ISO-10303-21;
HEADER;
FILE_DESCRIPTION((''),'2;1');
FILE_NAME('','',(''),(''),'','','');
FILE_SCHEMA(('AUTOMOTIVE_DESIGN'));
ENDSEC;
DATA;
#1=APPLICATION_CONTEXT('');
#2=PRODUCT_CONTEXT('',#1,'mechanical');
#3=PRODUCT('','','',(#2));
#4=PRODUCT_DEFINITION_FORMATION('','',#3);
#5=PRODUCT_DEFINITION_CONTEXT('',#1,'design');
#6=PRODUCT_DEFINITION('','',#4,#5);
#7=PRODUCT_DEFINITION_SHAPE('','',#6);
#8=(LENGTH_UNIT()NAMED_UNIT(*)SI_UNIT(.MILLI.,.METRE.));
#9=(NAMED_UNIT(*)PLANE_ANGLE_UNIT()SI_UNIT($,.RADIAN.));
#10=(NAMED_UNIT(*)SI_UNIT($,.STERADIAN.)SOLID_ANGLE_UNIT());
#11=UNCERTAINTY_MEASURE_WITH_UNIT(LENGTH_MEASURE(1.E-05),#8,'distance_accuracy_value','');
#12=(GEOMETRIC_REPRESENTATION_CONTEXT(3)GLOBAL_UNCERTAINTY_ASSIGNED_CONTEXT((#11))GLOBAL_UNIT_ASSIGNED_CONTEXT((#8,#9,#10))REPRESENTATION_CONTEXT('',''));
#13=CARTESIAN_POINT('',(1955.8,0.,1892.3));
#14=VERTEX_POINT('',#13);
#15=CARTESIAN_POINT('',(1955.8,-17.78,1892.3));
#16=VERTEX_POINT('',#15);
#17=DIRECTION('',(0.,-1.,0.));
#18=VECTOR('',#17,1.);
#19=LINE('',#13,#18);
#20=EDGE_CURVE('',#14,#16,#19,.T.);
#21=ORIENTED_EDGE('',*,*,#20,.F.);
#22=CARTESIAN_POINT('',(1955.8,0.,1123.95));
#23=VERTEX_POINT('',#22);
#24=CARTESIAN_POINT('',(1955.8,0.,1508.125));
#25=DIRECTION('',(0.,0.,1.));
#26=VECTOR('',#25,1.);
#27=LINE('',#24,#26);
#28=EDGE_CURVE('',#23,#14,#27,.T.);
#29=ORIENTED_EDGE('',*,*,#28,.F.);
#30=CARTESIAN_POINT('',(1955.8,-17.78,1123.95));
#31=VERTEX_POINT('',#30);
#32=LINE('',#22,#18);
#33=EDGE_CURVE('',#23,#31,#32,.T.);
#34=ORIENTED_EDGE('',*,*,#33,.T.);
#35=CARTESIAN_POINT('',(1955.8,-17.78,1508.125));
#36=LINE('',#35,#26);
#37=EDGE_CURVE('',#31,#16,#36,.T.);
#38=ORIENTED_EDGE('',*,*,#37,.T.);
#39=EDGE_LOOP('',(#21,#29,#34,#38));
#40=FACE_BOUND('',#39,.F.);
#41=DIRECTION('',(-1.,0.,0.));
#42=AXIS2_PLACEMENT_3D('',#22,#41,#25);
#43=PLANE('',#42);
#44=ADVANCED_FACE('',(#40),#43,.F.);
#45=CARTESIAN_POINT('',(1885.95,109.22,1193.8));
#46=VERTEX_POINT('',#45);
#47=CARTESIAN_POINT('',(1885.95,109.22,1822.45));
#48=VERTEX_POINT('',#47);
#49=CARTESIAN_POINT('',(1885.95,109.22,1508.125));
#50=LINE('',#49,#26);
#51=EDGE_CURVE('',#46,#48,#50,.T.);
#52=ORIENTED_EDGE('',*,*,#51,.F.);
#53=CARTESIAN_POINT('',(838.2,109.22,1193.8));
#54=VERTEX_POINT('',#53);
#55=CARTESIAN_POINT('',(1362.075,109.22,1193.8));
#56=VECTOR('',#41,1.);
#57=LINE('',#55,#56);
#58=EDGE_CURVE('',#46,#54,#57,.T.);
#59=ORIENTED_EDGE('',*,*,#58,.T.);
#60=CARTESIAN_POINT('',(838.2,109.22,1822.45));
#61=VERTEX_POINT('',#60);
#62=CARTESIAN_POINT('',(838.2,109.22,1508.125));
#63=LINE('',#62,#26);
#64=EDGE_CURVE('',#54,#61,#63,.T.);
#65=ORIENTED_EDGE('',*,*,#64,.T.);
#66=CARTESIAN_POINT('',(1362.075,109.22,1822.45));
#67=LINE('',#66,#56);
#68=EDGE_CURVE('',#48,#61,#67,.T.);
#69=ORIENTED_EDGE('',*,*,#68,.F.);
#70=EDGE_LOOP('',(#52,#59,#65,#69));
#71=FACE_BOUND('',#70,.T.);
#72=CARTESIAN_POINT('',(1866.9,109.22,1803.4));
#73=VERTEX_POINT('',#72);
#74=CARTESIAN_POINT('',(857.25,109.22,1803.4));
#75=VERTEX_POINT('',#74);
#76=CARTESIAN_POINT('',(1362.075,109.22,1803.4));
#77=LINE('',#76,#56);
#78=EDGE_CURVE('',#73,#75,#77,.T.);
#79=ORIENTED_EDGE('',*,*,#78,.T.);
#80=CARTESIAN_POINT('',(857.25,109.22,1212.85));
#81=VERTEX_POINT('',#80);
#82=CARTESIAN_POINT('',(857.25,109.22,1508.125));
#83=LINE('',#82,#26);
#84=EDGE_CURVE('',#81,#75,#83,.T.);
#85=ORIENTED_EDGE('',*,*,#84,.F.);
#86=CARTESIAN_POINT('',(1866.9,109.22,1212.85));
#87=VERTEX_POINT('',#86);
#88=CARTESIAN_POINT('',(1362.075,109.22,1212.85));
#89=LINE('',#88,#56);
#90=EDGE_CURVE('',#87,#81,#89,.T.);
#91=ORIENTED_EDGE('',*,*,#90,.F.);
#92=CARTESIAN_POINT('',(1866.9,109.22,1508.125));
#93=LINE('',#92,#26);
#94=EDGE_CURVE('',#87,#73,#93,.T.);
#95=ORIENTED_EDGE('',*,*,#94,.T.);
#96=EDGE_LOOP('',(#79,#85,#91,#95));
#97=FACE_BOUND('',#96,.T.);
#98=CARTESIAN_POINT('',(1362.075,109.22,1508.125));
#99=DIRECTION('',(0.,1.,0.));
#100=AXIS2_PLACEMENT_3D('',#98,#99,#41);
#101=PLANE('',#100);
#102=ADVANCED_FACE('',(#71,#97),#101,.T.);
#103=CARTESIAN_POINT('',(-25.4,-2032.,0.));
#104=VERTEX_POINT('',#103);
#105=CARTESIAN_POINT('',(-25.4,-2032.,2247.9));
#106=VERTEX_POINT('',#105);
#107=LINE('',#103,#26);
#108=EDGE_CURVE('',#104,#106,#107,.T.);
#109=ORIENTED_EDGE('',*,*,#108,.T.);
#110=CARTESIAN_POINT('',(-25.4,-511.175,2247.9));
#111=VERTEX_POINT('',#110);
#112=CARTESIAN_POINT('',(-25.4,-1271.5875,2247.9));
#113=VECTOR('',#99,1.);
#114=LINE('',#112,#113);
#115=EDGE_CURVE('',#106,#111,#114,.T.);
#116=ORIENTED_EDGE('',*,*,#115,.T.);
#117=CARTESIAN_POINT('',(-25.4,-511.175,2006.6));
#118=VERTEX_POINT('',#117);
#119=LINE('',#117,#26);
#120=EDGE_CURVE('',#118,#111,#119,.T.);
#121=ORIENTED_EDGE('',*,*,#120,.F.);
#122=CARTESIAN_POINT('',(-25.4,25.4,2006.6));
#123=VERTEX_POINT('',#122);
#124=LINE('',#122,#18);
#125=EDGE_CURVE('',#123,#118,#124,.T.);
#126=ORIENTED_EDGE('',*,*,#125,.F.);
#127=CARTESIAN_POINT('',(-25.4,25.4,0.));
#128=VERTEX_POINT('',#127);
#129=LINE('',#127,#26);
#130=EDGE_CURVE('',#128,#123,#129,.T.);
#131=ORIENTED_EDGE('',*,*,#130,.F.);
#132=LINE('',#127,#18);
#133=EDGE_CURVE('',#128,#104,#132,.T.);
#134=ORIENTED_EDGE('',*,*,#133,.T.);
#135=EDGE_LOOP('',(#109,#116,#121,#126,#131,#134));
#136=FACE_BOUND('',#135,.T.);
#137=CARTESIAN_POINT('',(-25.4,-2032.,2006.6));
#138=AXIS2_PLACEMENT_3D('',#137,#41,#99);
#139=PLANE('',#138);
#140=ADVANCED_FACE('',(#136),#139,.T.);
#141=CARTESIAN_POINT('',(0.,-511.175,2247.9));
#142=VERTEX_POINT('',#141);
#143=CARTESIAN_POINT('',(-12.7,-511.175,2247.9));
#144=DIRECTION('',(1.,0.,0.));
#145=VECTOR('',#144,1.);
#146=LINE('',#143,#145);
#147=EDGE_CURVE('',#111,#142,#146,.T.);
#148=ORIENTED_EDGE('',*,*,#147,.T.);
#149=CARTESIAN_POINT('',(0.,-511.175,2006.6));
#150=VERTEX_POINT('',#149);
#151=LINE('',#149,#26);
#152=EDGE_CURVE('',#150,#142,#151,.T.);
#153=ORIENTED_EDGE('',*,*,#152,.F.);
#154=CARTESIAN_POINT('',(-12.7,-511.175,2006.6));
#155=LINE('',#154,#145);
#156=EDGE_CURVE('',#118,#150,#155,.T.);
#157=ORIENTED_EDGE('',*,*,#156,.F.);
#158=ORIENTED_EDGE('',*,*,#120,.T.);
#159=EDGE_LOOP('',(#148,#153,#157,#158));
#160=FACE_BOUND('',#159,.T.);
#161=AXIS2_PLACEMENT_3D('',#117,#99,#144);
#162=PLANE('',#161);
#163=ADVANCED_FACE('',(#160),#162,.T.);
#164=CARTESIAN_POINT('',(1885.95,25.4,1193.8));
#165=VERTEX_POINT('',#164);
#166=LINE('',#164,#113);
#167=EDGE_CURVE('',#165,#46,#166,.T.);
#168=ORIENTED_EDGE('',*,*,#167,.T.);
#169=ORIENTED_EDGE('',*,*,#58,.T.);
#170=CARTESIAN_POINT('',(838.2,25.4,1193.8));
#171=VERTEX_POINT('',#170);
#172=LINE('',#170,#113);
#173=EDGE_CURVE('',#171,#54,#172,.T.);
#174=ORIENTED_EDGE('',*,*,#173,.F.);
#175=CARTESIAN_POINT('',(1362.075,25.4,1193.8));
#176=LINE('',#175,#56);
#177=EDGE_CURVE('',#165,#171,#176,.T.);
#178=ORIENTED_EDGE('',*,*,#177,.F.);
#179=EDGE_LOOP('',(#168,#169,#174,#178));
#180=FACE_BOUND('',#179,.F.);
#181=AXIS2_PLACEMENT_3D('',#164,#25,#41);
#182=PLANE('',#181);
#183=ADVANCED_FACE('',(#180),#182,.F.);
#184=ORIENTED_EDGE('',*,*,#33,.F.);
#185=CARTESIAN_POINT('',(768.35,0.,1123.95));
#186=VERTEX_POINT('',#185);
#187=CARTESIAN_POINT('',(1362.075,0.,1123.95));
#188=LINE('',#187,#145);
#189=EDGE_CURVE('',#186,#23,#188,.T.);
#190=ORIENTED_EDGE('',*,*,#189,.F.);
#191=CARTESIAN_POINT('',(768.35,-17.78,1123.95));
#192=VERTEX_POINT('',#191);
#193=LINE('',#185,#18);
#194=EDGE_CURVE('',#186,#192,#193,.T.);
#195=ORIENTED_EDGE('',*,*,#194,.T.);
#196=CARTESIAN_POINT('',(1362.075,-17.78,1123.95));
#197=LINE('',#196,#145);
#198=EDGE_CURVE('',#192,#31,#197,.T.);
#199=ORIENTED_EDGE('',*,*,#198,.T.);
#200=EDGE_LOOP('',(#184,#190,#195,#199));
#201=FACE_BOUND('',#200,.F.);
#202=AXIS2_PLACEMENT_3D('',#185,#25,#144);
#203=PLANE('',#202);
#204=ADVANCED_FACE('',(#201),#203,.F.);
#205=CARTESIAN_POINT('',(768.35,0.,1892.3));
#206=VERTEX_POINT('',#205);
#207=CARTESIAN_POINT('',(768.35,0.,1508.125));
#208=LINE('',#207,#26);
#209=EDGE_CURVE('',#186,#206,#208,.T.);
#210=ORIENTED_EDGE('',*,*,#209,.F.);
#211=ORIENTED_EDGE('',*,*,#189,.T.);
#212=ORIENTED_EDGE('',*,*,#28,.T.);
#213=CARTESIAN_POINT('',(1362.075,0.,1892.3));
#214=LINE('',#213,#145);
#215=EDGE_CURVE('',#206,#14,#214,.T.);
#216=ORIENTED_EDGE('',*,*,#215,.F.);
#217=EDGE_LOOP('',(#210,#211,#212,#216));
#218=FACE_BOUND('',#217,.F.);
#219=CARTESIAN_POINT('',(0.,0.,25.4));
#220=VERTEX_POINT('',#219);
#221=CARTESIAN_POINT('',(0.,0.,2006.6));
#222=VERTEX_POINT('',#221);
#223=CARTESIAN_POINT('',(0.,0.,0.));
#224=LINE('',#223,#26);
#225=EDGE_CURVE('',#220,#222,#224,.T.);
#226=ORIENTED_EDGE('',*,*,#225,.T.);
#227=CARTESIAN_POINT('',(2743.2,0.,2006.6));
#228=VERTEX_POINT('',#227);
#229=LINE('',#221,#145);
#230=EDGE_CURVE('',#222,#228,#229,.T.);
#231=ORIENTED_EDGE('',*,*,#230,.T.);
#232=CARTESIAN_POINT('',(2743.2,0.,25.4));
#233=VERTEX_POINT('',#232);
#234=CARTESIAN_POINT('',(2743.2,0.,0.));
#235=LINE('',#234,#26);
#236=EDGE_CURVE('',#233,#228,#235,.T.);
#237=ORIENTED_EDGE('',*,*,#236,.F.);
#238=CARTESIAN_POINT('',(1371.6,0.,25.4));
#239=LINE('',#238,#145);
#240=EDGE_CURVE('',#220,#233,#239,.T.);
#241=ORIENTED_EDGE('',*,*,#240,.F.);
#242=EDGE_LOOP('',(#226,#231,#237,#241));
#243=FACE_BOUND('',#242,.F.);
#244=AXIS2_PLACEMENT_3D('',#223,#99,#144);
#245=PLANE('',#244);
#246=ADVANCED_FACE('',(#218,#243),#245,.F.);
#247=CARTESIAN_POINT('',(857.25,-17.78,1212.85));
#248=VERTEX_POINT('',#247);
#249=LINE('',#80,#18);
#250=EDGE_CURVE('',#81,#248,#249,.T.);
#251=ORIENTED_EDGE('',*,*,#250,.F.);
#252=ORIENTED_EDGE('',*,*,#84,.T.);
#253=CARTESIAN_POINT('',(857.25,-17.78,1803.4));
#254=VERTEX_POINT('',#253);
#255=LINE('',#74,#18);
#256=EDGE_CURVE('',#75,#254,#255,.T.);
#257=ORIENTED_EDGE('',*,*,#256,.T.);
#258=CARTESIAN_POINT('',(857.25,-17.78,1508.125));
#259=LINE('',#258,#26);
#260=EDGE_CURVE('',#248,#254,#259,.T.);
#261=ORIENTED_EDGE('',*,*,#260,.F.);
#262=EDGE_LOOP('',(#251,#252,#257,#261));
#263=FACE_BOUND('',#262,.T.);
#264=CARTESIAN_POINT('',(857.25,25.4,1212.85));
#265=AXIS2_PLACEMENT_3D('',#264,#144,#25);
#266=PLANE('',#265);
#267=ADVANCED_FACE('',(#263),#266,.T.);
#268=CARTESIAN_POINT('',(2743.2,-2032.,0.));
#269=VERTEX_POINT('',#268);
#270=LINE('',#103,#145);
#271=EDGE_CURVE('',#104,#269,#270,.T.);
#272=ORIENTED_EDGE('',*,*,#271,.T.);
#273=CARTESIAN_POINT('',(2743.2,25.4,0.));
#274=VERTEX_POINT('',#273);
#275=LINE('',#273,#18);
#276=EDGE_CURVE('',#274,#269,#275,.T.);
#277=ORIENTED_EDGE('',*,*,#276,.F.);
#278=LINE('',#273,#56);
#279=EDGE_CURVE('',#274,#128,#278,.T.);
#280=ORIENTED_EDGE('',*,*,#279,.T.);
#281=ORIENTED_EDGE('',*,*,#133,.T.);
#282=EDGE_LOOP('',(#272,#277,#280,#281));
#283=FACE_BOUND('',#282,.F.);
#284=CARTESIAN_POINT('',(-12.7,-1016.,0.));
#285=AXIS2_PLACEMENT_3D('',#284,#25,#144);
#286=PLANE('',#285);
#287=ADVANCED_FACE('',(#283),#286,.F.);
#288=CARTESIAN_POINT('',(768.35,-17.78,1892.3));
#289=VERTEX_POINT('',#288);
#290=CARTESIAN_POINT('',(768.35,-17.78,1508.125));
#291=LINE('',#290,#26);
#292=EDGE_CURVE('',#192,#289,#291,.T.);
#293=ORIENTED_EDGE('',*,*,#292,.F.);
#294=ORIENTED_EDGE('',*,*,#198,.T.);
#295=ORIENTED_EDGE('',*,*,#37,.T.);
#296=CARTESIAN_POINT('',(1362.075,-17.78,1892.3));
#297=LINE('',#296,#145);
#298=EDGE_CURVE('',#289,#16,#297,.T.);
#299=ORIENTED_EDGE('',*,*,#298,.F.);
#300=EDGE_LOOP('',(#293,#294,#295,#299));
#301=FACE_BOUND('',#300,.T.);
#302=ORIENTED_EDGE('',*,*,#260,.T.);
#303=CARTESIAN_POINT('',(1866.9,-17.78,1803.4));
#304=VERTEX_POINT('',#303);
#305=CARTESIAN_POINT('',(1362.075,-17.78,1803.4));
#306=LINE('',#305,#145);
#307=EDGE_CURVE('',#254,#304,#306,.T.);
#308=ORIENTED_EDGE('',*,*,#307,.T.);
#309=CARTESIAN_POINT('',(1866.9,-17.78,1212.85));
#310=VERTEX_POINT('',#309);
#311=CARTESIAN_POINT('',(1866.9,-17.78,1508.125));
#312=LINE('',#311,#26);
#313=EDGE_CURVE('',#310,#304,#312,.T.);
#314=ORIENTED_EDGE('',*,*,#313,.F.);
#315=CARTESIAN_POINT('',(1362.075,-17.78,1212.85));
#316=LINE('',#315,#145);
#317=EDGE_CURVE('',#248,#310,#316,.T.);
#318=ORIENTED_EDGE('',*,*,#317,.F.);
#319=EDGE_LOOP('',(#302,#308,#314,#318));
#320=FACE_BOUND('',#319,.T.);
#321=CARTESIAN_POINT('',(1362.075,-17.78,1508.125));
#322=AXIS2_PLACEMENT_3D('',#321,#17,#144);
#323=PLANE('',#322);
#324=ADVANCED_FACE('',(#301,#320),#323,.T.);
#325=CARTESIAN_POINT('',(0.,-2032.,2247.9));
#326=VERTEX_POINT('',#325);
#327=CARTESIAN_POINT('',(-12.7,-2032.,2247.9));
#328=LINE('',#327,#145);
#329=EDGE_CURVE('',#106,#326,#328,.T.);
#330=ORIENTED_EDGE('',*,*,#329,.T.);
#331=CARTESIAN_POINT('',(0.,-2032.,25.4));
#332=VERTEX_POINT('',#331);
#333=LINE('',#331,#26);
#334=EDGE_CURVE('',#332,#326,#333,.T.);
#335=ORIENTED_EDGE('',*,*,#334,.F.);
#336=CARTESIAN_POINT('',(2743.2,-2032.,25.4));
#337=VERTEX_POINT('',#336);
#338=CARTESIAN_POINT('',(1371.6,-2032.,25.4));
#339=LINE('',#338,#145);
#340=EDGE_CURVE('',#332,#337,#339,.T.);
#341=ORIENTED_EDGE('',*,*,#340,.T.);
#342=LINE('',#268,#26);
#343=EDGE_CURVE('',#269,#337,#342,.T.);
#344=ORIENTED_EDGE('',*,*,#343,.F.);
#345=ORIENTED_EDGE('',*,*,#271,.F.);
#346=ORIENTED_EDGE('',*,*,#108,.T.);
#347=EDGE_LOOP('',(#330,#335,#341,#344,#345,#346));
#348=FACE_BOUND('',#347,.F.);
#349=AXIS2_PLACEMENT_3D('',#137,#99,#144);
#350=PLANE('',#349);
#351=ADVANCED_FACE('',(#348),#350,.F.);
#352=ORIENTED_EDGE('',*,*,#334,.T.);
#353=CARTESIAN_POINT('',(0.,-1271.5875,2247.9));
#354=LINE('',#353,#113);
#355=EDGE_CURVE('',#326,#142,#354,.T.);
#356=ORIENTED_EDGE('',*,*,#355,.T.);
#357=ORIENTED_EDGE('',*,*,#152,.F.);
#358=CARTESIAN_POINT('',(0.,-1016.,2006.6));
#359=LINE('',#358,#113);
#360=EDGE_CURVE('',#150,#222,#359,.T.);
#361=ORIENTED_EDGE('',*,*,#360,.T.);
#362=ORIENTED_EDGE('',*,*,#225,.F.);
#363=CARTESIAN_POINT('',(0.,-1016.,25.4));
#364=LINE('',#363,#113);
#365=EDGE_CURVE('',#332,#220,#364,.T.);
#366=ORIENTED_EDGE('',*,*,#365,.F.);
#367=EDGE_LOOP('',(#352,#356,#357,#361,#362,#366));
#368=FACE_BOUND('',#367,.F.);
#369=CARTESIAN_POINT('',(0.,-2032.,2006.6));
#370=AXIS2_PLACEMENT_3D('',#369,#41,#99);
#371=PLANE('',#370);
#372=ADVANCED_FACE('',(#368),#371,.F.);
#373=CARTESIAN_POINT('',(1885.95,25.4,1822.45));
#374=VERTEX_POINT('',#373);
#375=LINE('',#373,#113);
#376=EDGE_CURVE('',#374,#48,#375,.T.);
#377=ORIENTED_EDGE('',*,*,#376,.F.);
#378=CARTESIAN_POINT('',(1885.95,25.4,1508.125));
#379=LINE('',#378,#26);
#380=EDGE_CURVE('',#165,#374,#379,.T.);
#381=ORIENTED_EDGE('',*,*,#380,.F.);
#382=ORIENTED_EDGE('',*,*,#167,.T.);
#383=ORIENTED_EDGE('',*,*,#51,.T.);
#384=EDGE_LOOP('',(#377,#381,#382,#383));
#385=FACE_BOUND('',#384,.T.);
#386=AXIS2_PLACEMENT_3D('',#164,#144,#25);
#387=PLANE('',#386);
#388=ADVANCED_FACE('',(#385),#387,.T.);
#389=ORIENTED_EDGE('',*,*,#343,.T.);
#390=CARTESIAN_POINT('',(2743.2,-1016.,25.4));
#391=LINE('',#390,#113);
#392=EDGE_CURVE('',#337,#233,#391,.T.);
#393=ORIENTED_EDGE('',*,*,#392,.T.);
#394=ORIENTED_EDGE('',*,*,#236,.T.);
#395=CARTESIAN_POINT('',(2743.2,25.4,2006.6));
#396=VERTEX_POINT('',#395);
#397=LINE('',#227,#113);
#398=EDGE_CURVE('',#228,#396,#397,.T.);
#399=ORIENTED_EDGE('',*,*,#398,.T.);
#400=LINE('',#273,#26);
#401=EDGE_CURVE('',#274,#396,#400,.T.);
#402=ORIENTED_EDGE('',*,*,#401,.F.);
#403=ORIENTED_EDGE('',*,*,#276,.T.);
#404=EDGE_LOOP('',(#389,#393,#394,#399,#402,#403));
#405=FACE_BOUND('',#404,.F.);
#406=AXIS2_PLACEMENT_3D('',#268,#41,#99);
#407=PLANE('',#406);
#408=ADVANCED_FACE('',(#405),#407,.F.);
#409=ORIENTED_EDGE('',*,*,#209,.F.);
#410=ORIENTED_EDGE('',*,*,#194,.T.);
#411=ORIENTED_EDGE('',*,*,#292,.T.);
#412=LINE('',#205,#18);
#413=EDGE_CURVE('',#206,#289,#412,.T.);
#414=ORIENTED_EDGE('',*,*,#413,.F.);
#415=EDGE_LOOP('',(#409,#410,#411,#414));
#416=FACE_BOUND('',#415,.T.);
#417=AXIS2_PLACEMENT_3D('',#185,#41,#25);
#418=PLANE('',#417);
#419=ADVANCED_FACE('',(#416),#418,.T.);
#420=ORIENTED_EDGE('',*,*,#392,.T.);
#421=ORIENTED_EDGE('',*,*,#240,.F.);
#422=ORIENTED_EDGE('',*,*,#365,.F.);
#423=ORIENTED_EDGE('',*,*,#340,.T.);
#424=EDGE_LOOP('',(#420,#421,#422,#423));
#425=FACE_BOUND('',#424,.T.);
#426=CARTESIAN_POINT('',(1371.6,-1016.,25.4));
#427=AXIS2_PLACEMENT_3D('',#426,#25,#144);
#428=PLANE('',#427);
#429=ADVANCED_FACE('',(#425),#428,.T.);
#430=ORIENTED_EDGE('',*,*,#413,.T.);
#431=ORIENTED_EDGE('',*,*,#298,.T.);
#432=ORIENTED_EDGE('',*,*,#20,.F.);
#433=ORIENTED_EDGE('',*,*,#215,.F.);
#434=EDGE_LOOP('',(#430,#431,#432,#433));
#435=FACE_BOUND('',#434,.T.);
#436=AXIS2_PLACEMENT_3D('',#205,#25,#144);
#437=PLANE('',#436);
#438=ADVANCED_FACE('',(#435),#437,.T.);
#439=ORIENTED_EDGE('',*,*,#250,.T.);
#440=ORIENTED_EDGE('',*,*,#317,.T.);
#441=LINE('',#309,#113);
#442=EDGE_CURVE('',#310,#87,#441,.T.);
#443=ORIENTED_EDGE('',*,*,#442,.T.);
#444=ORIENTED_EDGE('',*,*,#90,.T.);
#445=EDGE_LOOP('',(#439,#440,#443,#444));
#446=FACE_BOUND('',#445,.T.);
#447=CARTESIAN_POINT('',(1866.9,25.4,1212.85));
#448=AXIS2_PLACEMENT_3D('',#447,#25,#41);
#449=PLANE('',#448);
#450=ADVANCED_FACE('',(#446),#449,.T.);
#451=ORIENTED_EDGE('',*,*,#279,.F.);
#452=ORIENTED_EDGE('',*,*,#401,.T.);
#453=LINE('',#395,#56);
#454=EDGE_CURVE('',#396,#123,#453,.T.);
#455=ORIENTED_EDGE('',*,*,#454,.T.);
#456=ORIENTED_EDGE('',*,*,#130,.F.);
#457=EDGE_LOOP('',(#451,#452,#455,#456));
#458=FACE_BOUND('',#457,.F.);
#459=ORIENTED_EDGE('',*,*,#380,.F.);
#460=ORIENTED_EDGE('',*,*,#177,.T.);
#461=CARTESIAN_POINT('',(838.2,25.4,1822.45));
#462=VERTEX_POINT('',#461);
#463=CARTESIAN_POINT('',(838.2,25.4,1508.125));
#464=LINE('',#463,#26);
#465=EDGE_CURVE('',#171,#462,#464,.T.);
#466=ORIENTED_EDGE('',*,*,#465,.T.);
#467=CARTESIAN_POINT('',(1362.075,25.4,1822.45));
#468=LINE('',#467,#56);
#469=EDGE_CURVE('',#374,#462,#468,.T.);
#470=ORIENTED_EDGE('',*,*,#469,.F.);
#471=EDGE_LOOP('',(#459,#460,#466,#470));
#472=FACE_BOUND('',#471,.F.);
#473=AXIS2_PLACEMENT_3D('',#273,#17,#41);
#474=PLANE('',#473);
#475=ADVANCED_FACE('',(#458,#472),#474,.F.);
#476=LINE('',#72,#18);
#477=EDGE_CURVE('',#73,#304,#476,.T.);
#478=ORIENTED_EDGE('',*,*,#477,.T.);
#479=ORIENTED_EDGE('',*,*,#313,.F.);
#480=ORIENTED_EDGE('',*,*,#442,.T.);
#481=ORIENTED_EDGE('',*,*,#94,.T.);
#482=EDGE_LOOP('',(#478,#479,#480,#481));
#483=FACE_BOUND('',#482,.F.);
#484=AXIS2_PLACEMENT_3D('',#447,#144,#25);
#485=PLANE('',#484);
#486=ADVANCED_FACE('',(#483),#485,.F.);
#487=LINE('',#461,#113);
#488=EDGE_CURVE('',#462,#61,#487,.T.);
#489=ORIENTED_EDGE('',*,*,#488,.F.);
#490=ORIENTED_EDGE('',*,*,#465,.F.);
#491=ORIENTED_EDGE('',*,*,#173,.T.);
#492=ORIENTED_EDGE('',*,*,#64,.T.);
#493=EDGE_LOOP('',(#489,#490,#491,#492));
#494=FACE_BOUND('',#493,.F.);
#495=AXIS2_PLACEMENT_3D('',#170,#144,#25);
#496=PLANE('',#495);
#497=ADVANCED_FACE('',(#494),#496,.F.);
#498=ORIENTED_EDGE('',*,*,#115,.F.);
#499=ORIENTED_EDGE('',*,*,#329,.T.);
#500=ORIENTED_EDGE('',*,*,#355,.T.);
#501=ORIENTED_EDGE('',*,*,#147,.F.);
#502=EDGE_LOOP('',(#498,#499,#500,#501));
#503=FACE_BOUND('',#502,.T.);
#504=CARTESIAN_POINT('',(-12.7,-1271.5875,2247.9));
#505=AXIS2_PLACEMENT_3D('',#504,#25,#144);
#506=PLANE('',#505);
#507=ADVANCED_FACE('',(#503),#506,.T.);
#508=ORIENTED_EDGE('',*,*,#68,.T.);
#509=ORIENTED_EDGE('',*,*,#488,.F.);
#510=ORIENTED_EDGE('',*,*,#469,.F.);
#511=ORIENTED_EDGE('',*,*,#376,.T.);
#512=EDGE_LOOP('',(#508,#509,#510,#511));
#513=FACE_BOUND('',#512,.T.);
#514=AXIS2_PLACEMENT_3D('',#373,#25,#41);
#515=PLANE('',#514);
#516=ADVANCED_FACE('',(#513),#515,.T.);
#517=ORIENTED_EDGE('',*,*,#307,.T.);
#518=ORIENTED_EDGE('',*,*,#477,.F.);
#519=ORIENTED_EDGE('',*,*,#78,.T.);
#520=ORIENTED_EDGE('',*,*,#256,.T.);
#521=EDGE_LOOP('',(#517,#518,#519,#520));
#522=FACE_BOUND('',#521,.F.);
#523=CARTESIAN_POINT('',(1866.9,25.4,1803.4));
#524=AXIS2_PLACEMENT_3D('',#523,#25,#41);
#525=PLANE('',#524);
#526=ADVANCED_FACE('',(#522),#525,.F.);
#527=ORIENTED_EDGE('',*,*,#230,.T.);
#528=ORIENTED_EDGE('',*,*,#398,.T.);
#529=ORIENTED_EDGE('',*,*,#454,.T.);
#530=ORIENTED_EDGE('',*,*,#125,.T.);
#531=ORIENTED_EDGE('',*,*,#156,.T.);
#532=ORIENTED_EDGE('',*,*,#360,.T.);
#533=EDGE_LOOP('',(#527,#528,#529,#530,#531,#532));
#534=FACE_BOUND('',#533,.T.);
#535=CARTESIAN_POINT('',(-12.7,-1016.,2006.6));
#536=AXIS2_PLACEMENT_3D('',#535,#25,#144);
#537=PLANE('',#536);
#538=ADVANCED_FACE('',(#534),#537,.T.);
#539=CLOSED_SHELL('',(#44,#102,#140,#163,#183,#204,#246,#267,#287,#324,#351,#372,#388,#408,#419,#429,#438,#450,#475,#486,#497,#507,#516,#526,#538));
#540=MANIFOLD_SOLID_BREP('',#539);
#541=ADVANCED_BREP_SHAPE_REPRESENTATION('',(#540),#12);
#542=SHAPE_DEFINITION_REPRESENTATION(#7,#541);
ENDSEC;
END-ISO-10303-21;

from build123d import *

# Parameters (mm, degrees)
F0_W      = 2743.2
F0_H      = 2032
F1_DEPTH  = 25.4
F2_W      = 25.4
F2_H      = 2032
F3_DEPTH  = 2006.6
F4_W      = 1187.45
F4_H      = 768.35
F4_W_2    = 1009.65
F4_H_2    = 590.55
F5_DEPTH  = 17.78
F6_DEPTH  = 25.4
F7_W      = 1047.75
F7_H      = 628.65
F7_W_2    = 1009.65
F7_H_2    = 590.55
F8_DEPTH  = 83.82
F9_W      = 25.4
F9_H      = 1520.825
F10_DEPTH = 241.3


with BuildPart() as f1:
    # F0 (on Top) → F1 (new body)
    with BuildSketch(Plane.XY):
        with Locations((1371.6, -1016)):
            Rectangle(F0_W, F0_H)
    extrude(amount=F1_DEPTH)

    # F2 (on Top) → F3 (join)
    with BuildSketch(Plane.XY):
        with Locations((-12.7, -1016)):
            Rectangle(F2_W, F2_H)
        Polygon((-25.4, 0), (0, 0), (2743.2, 0), (2743.2, 25.4), (-25.4, 25.4), align=None)
    extrude(amount=F3_DEPTH)

    # F4 (on face) → F5 (join)
    with BuildSketch(Plane.XZ):
        with Locations((1362.075, 1508.125)):
            Rectangle(F4_W, F4_H)
        with Locations((1362.075, 1508.125)):
            Rectangle(F4_W_2, F4_H_2, mode=Mode.SUBTRACT)
    extrude(amount=F5_DEPTH)

    # F6 (cut): a face of the model
    f6_faces = [f1.faces().sort_by_distance(p)[0] for p in [
        (1362.075, 0, 1508.125),
    ]]
    extrude(f6_faces, amount=-F6_DEPTH, mode=Mode.SUBTRACT)

    # F7 (on face) → F8 (join)
    with BuildSketch(Plane(origin=(0, 25.4, 0), x_dir=(-1, 0, 0), z_dir=(0, 1, 0))):
        with Locations((-1362.075, 1508.125)):
            Rectangle(F7_W, F7_H)
        with Locations((-1362.075, 1508.125)):
            Rectangle(F7_W_2, F7_H_2, mode=Mode.SUBTRACT)
    extrude(amount=F8_DEPTH)

    # F9 (on face) → F10 (join)
    with BuildSketch(Plane.XY.offset(2006.6)):
        with Locations((-12.7, -1271.5875)):
            Rectangle(F9_W, F9_H)
    extrude(amount=F10_DEPTH)


solid = f1.part
